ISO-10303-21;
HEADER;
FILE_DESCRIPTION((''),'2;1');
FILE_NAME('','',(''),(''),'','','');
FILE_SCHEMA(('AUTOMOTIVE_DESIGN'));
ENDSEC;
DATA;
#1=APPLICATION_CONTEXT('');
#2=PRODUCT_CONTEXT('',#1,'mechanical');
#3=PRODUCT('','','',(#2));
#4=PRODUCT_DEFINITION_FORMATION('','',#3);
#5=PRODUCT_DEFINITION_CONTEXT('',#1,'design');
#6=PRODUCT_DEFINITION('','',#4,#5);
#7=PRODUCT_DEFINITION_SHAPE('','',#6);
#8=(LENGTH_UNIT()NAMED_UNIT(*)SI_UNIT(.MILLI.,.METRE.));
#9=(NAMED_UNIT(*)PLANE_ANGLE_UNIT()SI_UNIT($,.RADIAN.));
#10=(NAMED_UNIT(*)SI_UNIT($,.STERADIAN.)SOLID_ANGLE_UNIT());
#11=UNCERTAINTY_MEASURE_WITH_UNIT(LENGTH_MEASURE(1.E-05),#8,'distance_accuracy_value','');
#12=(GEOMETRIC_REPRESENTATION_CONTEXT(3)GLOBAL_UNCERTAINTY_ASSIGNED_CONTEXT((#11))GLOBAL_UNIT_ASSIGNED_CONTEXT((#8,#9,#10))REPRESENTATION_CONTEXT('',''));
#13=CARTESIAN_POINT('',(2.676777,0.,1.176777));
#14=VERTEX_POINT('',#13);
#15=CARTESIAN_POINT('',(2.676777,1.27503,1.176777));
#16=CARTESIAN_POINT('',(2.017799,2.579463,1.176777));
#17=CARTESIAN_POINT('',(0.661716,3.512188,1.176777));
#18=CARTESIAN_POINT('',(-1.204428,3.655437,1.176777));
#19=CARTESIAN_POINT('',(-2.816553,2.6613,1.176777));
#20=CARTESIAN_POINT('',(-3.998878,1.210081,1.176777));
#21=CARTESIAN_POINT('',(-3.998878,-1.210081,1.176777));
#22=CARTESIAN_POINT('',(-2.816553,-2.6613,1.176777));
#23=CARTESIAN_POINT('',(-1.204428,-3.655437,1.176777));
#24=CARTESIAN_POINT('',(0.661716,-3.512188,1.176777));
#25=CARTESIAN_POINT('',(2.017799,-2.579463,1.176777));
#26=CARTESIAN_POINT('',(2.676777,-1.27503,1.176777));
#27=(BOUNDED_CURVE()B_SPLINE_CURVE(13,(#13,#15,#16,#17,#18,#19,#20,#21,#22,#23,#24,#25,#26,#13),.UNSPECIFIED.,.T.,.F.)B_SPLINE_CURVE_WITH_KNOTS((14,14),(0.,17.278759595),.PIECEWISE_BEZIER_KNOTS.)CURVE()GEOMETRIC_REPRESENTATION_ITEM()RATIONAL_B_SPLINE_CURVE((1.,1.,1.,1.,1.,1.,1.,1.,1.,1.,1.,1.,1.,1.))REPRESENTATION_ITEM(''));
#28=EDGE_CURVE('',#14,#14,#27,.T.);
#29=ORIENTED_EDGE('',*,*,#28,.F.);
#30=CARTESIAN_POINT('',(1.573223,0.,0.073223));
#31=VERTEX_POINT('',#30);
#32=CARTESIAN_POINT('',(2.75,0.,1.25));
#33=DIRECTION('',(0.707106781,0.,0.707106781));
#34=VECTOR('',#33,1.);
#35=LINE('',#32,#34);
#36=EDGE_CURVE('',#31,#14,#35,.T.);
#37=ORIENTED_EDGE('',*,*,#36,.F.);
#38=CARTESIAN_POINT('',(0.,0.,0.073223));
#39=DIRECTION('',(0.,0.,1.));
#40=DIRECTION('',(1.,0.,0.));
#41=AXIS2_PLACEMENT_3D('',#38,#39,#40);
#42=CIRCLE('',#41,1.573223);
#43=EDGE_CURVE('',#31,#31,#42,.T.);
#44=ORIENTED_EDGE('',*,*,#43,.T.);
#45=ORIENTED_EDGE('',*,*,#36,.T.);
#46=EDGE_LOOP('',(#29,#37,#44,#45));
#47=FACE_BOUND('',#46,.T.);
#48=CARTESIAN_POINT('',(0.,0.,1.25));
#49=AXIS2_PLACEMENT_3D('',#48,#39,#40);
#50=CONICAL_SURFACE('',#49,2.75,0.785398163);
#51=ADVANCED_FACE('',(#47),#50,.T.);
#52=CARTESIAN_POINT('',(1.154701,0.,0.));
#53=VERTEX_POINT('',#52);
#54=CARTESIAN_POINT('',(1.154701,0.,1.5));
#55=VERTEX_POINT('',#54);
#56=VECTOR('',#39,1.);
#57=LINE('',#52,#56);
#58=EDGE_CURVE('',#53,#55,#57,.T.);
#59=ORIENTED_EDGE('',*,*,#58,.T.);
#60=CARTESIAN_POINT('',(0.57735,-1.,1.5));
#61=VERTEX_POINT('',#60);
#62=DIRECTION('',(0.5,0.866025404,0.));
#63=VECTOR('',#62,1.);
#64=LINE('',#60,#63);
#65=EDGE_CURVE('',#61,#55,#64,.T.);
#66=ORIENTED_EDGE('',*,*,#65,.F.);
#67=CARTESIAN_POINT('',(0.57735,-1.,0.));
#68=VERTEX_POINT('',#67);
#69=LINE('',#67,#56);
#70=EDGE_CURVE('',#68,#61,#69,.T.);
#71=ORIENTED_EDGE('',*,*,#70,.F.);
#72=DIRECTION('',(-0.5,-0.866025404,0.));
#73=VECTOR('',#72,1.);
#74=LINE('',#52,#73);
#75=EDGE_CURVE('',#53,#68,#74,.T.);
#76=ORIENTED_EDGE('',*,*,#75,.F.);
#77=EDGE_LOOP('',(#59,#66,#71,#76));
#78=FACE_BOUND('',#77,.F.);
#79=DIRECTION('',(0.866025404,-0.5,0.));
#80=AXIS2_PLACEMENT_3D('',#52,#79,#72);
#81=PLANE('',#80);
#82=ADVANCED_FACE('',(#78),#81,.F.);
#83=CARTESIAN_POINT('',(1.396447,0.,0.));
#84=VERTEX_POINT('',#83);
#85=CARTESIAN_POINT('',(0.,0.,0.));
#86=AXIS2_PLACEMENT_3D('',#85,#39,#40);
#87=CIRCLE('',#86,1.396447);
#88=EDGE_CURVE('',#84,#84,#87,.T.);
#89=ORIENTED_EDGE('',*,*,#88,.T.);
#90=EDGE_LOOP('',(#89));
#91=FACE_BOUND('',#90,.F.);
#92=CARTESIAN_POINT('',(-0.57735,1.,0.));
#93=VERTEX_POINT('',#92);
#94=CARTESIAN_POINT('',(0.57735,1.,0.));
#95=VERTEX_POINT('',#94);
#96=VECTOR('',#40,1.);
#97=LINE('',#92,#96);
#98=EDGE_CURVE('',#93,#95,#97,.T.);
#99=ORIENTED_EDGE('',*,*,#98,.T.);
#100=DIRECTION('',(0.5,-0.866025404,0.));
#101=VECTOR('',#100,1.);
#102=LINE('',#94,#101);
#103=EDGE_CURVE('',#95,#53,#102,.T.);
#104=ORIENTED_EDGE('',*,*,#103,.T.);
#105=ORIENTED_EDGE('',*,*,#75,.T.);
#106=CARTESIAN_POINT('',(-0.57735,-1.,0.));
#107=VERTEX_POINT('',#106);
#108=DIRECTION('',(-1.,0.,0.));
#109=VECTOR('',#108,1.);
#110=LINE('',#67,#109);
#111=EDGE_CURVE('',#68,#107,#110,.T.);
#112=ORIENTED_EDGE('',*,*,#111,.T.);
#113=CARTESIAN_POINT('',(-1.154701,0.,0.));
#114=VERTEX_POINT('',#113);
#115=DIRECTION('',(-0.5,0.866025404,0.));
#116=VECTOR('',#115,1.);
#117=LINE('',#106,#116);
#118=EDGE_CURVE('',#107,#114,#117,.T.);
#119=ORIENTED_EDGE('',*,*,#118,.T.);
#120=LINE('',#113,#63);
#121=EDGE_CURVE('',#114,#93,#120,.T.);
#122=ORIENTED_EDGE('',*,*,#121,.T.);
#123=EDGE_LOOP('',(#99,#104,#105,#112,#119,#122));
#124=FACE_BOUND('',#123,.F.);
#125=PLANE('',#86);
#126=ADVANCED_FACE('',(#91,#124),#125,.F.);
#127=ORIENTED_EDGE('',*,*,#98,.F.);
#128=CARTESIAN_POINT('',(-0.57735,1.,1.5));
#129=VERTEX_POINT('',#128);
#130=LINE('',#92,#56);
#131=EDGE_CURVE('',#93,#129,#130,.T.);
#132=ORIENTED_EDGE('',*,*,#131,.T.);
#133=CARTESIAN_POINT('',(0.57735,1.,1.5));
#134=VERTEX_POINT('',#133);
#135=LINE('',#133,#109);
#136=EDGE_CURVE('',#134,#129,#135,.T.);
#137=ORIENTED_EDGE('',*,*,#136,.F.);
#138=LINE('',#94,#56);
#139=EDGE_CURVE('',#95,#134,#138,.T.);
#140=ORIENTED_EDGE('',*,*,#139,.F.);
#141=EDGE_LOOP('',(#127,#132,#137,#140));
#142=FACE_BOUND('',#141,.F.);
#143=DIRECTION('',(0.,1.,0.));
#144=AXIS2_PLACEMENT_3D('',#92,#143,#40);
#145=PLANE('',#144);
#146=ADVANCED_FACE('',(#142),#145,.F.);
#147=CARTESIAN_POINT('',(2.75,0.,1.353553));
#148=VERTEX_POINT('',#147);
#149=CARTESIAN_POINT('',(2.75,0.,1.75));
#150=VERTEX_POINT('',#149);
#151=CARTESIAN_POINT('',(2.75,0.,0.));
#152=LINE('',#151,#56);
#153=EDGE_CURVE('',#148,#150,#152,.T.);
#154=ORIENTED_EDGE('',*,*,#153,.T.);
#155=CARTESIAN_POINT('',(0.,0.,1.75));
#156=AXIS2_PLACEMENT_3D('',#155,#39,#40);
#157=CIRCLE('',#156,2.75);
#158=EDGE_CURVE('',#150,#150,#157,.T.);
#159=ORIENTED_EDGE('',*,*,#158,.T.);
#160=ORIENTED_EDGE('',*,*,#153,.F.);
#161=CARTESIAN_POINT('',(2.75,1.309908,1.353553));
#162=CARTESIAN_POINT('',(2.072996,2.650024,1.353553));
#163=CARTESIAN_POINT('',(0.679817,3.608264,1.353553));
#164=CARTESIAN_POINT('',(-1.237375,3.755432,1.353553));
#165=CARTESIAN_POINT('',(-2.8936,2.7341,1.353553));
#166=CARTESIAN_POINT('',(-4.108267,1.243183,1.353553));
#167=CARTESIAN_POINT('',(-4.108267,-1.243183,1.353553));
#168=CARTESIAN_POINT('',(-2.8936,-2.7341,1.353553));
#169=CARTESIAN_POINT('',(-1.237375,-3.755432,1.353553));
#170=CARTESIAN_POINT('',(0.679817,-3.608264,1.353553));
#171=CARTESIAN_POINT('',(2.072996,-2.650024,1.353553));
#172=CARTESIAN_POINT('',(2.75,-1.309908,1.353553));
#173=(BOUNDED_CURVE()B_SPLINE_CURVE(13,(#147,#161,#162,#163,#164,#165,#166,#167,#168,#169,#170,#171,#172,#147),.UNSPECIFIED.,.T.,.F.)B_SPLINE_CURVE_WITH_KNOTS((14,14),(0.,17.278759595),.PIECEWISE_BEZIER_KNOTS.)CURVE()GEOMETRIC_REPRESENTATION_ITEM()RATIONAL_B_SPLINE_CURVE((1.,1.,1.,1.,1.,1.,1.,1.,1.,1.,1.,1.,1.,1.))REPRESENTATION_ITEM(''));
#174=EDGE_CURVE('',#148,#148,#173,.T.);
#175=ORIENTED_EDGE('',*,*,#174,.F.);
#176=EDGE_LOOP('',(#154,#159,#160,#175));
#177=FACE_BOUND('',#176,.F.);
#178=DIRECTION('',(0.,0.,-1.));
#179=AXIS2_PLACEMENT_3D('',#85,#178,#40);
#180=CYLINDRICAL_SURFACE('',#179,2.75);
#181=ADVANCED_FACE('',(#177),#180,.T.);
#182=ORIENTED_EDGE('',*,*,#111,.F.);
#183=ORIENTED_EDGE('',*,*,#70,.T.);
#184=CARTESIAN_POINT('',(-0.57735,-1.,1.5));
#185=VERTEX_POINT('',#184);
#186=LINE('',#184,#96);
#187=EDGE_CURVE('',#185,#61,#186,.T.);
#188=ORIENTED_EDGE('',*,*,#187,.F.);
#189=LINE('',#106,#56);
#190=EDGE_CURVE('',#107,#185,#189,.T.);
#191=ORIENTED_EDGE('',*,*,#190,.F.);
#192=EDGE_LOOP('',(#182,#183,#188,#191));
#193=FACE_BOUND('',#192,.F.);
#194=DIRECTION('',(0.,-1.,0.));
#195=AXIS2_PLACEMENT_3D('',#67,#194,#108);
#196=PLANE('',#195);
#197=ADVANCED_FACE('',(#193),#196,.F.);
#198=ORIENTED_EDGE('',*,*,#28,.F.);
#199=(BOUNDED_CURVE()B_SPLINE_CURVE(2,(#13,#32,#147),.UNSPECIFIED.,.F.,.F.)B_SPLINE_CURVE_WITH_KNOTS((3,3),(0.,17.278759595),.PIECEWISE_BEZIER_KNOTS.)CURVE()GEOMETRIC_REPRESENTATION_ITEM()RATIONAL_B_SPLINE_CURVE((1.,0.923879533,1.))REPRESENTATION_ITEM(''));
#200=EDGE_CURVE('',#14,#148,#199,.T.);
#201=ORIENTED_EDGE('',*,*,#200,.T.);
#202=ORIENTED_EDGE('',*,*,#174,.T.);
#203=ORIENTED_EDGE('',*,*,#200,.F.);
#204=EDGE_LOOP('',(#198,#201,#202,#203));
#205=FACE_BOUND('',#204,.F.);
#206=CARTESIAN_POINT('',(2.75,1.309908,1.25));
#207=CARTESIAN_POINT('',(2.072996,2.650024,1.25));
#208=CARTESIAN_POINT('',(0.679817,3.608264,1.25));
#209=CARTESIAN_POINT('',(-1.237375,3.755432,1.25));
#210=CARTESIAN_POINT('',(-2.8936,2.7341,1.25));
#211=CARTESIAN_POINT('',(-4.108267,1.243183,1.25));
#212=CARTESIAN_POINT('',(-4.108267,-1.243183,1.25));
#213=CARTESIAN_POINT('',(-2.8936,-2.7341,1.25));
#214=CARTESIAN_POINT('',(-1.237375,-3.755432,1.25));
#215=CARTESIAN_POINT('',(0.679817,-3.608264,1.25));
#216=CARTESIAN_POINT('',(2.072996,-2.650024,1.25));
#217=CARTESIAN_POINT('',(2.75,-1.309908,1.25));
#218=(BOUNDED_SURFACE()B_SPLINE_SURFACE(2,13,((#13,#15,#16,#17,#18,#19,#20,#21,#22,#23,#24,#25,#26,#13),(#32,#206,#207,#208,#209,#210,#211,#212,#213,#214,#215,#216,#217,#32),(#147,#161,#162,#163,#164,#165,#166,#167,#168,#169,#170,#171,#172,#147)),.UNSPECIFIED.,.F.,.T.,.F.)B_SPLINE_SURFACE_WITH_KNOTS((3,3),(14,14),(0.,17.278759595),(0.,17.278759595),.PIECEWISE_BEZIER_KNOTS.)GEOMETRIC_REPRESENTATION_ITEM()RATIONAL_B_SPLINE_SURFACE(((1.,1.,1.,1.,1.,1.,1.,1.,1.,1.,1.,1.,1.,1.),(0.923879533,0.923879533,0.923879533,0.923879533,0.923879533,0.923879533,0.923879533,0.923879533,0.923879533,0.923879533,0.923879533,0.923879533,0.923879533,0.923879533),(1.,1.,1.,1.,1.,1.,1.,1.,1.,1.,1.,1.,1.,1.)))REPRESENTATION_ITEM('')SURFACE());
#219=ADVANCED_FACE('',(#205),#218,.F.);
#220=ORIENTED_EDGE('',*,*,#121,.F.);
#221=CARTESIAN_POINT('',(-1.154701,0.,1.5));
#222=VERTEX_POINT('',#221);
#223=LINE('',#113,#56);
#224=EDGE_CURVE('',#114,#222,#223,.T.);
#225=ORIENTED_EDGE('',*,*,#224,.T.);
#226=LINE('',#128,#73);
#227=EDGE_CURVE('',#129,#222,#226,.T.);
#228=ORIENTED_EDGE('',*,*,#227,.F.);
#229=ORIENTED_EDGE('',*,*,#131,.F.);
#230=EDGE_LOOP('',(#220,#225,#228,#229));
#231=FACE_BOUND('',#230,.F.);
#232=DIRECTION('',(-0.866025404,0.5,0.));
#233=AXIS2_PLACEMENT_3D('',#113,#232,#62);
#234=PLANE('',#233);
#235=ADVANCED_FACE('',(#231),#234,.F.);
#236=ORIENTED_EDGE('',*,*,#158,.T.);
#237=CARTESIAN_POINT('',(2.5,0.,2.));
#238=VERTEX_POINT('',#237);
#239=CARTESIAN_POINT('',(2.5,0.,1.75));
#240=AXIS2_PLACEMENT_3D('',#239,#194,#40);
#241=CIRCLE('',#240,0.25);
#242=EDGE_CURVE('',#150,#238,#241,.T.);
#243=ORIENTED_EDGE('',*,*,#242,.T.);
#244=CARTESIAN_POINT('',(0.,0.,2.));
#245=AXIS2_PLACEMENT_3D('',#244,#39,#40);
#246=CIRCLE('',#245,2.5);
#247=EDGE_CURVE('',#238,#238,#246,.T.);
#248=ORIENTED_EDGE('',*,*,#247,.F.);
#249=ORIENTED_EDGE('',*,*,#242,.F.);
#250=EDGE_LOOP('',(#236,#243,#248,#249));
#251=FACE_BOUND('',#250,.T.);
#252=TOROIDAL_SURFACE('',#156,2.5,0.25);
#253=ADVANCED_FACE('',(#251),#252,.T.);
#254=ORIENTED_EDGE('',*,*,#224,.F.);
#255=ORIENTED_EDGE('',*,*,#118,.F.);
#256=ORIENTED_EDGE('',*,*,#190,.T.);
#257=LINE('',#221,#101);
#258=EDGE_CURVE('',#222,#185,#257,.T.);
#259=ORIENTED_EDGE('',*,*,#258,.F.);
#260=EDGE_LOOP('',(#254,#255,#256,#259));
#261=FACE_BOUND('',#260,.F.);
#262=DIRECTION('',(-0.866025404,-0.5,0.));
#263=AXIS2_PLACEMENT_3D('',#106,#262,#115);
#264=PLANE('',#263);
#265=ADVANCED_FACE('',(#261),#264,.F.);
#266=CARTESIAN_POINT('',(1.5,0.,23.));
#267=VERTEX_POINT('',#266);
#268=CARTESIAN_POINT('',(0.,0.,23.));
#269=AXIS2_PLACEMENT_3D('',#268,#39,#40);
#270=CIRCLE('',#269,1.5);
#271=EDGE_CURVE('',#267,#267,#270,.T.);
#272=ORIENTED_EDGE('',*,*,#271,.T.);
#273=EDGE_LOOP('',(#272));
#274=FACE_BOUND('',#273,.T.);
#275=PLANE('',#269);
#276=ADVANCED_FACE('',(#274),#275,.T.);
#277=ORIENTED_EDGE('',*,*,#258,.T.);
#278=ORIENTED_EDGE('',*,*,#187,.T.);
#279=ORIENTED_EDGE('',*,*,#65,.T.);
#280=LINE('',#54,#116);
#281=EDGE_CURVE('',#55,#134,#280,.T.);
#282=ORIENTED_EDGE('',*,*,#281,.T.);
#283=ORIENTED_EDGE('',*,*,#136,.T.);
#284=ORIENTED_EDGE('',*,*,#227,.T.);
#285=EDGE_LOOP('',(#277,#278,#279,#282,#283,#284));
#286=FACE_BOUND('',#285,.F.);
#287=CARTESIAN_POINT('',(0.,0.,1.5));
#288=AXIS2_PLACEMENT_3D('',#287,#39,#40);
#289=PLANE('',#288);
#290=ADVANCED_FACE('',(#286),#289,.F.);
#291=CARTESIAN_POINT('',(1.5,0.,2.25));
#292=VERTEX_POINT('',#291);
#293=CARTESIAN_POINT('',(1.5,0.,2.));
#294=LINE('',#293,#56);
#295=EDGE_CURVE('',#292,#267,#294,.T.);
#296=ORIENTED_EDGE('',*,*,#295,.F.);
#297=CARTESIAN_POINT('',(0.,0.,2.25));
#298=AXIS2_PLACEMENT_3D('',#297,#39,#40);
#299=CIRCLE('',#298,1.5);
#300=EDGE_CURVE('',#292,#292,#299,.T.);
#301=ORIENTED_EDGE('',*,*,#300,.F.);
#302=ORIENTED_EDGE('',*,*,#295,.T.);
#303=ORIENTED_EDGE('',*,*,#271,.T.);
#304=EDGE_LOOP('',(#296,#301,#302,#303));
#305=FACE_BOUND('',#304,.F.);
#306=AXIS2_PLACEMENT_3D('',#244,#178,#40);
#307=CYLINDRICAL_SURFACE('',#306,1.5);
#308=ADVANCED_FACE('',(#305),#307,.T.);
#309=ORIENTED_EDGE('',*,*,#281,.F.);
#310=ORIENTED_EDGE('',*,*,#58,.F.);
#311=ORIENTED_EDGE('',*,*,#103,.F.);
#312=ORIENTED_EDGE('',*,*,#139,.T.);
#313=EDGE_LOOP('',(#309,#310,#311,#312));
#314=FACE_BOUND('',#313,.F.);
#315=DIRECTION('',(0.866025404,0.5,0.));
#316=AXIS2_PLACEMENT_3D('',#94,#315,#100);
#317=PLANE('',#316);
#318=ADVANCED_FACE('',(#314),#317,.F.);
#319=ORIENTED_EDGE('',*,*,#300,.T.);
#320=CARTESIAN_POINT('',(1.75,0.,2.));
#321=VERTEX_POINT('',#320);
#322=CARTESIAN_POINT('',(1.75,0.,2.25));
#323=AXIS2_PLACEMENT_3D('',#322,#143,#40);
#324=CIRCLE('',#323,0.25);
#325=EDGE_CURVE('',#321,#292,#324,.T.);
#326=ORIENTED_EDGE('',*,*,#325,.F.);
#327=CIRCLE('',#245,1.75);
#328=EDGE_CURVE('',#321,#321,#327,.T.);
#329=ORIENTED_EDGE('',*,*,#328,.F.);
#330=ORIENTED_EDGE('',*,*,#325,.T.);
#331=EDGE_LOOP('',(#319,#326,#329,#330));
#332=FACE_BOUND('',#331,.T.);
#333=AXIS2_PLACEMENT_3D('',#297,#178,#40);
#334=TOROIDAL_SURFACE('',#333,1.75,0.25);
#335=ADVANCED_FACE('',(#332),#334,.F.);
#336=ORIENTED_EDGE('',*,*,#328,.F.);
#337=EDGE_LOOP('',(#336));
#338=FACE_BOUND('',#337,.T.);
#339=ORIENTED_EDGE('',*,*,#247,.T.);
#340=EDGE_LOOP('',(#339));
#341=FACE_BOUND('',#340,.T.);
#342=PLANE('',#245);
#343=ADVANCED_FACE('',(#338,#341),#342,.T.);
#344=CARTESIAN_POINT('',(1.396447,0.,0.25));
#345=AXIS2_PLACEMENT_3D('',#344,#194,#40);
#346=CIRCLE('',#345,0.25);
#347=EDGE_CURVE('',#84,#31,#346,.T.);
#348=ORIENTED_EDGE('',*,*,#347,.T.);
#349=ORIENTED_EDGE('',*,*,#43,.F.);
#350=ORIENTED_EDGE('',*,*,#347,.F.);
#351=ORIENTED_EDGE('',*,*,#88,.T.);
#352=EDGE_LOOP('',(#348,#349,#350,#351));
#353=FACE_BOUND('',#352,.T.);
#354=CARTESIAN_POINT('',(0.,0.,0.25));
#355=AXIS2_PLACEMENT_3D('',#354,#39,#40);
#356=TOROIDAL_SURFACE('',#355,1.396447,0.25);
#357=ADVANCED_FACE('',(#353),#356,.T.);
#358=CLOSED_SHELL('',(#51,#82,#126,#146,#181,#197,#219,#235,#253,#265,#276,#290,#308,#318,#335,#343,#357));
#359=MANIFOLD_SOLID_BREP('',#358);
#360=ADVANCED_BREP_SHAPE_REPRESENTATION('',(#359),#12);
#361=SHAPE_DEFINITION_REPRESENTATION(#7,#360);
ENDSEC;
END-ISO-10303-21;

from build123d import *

# Parameters (mm, degrees)
F1_R     = 2.75
F1_R_2   = 1.5
F2_DEPTH = 2
F3_START = 1.5
F3_DEPTH = 0.5
F4_START = 2
F4_DEPTH = 21
F5_SIZE2 = 1.25
F5_SIZE  = 1.25
F6_R     = 0.25


# Not quite as in the source:
# - a feature names something its author has since deleted; it is built from what else it names


with BuildPart() as f2:
    # F1 (on Top) → F2 (new body)
    with BuildSketch(Plane.XY):
        Circle(F1_R)
        Circle(F1_R_2, mode=Mode.SUBTRACT)
        Circle(F1_R_2)
        Polygon((-0.5773502692, -1), (-1.1547005384, 0), (-0.5773502692, 1), (0.5773502692, 1), (1.1547005384, 0), (0.5773502692, -1), align=None, mode=Mode.SUBTRACT)
    extrude(amount=F2_DEPTH)

    # F1 (on Top) → F3 (join)
    with BuildSketch(Plane.XY.offset(F3_START)):
        Polygon((-0.5773502692, 1), (-1.1547005384, 0), (-0.5773502692, -1), (0.5773502692, -1), (1.1547005384, 0), (0.5773502692, 1), align=None)
    extrude(amount=F3_DEPTH)

    # F1 (on Top) → F4 (join)
    with BuildSketch(Plane.XY.offset(F4_START)):
        Circle(F1_R_2)
        Polygon((-0.5773502692, -1), (-1.1547005384, 0), (-0.5773502692, 1), (0.5773502692, 1), (1.1547005384, 0), (0.5773502692, -1), align=None, mode=Mode.SUBTRACT)
        Polygon((-0.5773502692, 1), (-1.1547005384, 0), (-0.5773502692, -1), (0.5773502692, -1), (1.1547005384, 0), (0.5773502692, 1), align=None)
    extrude(amount=F4_DEPTH)

    # F5
    f5_edges = [f2.edges().sort_by_distance(p)[0] for p in [
        (-2.75, 0, 0),
    ]]
    chamfer(f5_edges, length=F5_SIZE, length2=F5_SIZE2)

    # F6
    f6_edges = [f2.edges().sort_by_distance(p)[0] for p in [
        (-2.75, 0, 2),
        (-1.5, 0, 2),
        (-1.5, 0, 0),
        (-2.75, 0, 1.25),
    ]]
    fillet(f6_edges, radius=F6_R)


solid = f2.part
